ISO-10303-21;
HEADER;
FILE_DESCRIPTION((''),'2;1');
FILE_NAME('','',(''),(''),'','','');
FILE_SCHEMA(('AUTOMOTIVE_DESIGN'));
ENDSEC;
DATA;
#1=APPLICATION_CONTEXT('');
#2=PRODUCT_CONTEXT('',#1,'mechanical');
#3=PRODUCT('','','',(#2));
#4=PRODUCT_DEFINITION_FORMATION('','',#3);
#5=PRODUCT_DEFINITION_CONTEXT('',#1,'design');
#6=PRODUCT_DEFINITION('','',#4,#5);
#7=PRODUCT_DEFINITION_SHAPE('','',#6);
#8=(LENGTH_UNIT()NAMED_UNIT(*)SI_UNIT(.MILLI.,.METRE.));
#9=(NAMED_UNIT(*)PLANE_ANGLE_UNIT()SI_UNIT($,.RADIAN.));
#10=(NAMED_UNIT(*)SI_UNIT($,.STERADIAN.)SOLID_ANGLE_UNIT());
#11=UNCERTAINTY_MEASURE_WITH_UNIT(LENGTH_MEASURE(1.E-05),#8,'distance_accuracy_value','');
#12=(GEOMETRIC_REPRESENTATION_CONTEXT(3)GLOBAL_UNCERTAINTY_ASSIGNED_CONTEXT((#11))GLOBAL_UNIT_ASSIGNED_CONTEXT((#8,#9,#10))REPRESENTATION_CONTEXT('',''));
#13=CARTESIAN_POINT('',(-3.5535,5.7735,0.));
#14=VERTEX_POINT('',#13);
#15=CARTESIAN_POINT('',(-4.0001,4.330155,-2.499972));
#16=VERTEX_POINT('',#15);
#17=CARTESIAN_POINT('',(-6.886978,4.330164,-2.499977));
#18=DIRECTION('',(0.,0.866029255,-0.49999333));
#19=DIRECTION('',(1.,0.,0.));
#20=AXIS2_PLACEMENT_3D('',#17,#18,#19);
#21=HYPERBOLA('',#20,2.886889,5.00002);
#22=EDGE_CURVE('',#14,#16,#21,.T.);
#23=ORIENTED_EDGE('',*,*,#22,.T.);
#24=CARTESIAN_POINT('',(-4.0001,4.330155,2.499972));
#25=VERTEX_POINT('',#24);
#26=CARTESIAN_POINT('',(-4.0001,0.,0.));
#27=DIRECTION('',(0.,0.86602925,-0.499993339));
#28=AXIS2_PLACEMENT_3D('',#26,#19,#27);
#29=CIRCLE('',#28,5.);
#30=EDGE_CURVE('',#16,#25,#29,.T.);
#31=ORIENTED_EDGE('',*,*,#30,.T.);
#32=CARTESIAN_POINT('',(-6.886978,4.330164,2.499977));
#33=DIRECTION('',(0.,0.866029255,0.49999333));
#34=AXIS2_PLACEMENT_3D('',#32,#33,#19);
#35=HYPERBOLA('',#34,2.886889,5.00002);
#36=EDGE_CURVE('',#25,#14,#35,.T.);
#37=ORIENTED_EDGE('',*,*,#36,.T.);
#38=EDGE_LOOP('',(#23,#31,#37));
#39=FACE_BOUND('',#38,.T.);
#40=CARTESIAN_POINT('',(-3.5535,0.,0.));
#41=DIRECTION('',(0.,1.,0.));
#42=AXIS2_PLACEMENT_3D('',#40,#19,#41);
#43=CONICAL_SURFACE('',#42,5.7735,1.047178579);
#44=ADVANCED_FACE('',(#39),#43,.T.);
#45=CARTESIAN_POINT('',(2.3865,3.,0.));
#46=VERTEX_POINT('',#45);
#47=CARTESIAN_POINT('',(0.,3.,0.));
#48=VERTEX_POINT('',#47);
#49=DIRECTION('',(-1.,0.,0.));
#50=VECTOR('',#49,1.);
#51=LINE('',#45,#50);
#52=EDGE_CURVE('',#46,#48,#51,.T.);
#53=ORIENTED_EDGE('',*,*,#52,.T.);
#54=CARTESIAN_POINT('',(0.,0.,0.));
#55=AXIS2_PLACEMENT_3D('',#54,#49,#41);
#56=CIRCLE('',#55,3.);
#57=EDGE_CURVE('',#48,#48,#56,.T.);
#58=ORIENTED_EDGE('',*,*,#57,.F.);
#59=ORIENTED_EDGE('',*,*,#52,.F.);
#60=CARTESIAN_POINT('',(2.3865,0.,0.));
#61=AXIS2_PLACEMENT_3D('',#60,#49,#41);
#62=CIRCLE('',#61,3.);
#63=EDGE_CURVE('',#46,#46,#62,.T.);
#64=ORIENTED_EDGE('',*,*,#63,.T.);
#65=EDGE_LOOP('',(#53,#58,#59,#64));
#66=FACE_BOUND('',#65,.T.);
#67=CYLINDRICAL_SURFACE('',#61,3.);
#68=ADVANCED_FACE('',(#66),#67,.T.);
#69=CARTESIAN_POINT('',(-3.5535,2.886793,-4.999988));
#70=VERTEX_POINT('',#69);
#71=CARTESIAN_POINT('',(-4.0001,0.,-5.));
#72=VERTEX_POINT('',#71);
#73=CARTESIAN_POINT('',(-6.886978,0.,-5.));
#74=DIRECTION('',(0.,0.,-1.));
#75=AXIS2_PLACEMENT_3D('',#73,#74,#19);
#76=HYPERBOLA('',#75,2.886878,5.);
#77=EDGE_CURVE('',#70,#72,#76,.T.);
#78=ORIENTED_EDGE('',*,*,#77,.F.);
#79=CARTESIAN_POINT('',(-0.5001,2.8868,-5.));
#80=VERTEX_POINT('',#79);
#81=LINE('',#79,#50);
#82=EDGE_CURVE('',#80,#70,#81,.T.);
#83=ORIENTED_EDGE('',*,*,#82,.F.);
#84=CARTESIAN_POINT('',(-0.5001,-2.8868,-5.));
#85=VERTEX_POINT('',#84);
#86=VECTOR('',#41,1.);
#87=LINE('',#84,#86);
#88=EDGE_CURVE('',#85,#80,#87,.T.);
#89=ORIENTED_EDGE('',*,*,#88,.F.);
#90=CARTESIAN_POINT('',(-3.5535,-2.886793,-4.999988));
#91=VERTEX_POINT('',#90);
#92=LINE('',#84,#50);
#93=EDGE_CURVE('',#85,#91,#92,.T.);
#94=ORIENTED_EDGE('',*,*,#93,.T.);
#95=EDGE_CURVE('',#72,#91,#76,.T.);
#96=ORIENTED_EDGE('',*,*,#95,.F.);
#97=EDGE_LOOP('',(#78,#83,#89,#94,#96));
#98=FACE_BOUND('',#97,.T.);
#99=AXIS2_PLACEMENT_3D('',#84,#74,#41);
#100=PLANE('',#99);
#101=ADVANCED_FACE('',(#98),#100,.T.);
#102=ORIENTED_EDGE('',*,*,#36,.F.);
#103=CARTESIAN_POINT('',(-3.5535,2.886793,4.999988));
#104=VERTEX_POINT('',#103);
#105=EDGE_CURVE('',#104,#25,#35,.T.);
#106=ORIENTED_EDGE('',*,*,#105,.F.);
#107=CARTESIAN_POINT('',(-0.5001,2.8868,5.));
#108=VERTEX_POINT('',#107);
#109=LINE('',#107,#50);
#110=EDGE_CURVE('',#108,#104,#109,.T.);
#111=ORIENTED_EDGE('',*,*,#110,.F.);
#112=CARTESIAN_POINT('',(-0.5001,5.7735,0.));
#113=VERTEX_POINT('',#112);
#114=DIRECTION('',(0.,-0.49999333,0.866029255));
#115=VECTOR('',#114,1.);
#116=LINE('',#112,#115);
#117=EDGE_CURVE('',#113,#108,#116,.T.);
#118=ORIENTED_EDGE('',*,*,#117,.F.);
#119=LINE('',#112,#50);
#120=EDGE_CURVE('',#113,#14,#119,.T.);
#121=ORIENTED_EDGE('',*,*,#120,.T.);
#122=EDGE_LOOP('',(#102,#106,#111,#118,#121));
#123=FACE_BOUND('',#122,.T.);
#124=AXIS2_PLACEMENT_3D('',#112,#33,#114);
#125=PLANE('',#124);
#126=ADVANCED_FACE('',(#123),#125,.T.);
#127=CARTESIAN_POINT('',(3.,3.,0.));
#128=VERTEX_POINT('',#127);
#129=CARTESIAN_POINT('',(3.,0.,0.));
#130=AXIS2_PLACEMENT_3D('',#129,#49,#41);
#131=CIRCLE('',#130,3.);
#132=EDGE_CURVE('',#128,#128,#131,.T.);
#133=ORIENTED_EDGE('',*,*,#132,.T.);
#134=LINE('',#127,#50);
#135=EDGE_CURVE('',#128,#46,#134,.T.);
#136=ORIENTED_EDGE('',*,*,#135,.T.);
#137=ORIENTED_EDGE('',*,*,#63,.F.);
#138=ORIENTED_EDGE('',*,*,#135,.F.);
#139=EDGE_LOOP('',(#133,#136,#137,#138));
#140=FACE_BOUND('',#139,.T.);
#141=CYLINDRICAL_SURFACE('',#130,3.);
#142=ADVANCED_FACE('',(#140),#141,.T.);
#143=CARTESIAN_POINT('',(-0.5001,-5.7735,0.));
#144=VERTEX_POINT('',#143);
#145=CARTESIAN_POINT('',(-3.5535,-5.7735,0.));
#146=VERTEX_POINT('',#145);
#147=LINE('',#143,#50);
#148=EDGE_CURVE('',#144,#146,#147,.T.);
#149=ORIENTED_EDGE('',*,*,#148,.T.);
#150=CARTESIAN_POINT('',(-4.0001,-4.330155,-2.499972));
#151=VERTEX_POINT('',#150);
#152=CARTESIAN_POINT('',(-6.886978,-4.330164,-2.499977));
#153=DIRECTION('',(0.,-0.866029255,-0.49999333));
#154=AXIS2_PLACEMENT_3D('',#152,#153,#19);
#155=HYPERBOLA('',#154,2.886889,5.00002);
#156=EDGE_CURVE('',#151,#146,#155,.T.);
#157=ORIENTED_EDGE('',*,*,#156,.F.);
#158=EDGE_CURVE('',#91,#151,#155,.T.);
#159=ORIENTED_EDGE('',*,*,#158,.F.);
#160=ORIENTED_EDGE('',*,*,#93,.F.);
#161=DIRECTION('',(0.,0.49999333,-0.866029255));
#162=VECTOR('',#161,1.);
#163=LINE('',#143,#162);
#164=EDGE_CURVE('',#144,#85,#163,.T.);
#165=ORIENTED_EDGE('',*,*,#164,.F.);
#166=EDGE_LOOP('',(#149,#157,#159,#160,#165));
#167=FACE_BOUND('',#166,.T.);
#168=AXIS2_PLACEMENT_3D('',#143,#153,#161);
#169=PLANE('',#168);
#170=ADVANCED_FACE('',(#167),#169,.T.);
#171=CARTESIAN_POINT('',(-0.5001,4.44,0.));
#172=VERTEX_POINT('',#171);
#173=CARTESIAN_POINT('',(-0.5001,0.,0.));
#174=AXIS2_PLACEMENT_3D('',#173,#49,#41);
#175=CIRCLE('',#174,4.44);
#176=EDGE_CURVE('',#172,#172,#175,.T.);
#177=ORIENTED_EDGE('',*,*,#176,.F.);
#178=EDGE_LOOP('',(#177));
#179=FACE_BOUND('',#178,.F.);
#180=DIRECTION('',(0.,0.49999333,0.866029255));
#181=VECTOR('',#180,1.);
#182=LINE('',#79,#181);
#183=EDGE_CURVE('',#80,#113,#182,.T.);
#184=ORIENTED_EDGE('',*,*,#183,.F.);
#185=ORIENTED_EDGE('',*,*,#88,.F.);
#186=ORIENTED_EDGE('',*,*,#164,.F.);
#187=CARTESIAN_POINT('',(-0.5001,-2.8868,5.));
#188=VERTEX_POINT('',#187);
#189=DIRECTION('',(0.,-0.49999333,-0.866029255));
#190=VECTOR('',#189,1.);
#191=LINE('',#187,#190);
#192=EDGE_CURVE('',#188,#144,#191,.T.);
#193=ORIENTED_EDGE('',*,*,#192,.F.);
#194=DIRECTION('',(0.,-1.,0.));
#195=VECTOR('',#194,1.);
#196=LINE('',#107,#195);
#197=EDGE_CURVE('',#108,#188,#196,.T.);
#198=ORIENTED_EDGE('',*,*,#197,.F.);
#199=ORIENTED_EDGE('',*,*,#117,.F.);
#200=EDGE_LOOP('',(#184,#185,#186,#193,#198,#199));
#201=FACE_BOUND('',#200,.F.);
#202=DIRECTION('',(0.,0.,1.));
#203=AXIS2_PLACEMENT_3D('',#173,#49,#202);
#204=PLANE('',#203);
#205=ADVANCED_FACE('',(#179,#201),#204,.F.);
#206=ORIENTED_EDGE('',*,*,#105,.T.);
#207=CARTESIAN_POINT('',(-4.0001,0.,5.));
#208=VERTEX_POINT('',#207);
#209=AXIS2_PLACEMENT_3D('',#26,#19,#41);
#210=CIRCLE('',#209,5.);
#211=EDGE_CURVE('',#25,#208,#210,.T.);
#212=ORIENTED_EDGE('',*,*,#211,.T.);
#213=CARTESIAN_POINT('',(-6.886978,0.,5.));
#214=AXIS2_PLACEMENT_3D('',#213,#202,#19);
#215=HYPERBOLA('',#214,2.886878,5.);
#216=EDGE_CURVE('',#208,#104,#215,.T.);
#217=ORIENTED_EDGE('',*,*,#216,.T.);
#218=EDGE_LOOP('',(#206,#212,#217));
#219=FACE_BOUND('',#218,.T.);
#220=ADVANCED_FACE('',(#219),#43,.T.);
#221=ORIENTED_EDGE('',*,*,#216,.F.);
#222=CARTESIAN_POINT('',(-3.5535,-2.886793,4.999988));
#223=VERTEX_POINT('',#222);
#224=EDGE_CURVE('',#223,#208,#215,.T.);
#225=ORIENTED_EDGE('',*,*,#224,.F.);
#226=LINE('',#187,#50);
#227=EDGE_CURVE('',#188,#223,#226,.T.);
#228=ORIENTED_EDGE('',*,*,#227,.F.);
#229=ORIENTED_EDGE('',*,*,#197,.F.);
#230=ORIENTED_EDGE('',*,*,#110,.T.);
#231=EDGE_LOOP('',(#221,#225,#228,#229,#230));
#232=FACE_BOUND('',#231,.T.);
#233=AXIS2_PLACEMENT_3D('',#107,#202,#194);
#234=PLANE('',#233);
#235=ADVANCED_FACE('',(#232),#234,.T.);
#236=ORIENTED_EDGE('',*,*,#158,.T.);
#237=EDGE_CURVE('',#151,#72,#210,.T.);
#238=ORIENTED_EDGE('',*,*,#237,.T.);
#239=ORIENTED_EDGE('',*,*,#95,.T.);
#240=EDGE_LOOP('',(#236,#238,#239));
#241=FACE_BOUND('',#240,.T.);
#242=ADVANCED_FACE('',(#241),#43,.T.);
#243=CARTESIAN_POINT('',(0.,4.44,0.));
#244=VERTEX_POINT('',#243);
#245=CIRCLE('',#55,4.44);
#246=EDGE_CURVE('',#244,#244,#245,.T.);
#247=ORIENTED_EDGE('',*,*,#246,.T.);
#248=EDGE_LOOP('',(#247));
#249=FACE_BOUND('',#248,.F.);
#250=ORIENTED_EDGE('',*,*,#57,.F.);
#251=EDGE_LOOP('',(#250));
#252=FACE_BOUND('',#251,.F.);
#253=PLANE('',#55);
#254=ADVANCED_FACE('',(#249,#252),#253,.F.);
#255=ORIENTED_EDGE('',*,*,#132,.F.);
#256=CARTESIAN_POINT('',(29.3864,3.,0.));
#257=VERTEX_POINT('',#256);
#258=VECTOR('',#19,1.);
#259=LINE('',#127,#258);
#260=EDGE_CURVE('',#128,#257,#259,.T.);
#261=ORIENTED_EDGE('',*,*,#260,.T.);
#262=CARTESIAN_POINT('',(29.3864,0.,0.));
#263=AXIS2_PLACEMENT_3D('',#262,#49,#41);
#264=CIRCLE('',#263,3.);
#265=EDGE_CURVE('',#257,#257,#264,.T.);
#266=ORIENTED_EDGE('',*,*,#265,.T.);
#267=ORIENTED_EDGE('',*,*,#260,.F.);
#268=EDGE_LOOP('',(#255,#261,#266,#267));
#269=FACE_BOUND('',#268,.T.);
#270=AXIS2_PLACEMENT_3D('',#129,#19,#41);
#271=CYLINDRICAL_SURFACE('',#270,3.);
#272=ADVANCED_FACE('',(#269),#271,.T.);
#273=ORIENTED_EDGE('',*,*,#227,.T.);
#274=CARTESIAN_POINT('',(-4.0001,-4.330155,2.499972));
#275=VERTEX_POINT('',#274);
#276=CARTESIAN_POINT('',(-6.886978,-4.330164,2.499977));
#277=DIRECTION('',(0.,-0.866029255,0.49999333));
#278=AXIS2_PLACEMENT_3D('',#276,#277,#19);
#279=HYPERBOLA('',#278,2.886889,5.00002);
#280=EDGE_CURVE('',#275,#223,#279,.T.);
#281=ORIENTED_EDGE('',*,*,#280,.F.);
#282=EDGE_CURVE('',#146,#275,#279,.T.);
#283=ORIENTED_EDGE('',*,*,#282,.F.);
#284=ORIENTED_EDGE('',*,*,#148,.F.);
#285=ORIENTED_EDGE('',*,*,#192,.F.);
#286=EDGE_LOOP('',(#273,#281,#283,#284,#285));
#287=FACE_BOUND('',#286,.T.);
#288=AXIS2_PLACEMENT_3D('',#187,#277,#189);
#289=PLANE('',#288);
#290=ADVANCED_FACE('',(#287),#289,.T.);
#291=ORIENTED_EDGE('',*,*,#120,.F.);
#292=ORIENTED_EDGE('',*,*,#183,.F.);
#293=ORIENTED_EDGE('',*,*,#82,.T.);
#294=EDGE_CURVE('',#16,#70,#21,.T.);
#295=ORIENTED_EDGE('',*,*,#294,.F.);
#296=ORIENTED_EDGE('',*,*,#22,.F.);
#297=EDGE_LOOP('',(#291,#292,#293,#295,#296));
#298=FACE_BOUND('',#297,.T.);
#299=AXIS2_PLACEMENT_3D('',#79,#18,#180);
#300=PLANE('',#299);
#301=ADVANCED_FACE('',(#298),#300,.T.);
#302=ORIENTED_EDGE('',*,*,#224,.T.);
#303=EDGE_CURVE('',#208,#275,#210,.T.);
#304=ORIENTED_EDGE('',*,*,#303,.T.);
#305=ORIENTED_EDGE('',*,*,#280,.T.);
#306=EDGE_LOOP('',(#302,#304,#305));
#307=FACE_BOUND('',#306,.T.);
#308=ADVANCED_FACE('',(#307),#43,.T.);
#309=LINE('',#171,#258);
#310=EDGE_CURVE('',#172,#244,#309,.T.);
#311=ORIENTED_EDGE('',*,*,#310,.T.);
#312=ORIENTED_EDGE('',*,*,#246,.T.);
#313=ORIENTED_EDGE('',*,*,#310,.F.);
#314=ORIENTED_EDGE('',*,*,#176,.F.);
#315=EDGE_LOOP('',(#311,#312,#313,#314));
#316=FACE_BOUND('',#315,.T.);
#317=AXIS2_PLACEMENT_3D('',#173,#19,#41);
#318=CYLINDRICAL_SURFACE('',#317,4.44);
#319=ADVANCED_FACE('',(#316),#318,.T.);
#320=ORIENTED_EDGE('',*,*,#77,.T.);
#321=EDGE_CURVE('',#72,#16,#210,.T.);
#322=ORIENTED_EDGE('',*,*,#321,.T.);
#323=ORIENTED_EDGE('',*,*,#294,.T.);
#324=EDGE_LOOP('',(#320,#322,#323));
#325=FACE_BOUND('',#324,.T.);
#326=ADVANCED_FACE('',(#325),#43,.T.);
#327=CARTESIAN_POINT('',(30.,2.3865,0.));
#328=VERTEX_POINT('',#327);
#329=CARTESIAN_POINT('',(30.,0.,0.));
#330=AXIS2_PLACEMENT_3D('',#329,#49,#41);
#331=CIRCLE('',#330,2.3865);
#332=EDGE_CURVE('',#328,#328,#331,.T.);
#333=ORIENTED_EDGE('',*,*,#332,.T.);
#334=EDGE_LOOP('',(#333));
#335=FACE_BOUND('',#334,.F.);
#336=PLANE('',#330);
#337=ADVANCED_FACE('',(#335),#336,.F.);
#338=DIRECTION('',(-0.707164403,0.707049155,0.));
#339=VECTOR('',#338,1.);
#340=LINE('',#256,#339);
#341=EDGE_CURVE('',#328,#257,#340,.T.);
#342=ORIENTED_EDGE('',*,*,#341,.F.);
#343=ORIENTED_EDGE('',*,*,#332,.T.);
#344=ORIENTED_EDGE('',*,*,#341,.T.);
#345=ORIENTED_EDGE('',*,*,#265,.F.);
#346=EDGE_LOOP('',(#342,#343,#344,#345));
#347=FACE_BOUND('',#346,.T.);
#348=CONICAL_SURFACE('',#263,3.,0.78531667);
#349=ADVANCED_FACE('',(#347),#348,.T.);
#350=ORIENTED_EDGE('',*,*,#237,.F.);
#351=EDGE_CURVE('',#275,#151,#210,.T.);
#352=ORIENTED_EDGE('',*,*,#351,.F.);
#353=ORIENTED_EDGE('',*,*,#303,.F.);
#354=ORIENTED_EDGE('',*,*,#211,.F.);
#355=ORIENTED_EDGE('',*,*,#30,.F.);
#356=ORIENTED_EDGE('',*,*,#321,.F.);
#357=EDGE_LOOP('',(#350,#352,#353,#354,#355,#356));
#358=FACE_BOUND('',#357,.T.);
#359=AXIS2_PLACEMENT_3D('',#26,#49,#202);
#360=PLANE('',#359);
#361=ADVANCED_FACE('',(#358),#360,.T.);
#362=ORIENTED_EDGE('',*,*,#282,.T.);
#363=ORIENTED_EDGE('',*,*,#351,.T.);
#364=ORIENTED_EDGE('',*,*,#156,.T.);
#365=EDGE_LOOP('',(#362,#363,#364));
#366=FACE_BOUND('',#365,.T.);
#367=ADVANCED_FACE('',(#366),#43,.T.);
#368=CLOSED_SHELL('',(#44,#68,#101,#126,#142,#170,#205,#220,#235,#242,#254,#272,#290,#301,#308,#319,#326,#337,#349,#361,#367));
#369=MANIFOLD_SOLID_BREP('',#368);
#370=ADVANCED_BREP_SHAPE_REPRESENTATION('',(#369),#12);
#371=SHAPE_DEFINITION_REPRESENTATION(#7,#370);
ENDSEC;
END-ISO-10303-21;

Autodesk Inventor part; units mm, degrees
ref_plane "YZ Plane" through (0, 0, 0) normal (1, 0, 0) x (0, 1, 0)
ref_plane "XZ Plane" through (0, 0, 0) normal (0, 1, 0) x (-1, 0, 0)
sketch "Sketch1" plane through (0, 0, 0) normal (0, 0, 1) x (1, 0, 0)
  line L0 (0, 4.44) -> (0, 3)
  line L1 (3, 3) -> (30, 3)
  line L2 (30, 3) -> (30, 0)
  line L3 (30, 0) -> (-0.5001, 0)
  line L4 (-6.6001, 0) -> (36.1, 0) projected
  line L5 (-0.5001, 0) -> (-0.5001, 4.44)
  line L6 (-0.5001, 4.44) -> (0, 4.44)
  line L7 (3, 3) -> (2.3865, 3)
  line L8 (2.3865, 3) -> (0, 3)
  line L9 (0, -0.888) -> (0, 5.328) projected
  dimension "d0" = 30
  dimension "d1" = 27
  dimension "d2" = 6
  dimension "d9" = 0.5001
  dimension "d10" = 8.88
  dimension "d13" = 0.6136
  dimension "d14" = 6
revolve "Body" add sketch "Sketch1" angle 360 about axis through (30, 0, 0) along (-1, 0, 0)
sketch "Sketch2" plane through (-0.5001, 0, 0) normal (-1, 0, 0) x (0, 0, 1)
  line L0 (0, 5.7735) -> (5, 2.8868)
  line L1 (5, 2.8868) -> (5, -2.8868)
  line L2 (5, -2.8868) -> (0, -5.7735)
  line L3 (0, -5.7735) -> (-5, -2.8868)
  line L4 (-5, -2.8868) -> (-5, 2.8868)
  line L5 (-5, 2.8868) -> (0, 5.7735)
  point P0 (0, 0)
  point P1 (0, 0)
  dimension "d11" = 10
extrude "Head" add sketch "Sketch2" along normal blind 3.5
sketch "Sketch4" plane through (0, 0, 0) normal (0, 0, 1) x (1, 0, 0)
  line L0 (-4.0001, 5) -> (-4.0001, 5.7735)
  line L1 (-4.0001, 5.7735) -> (-3.5535, 5.7735)
  line L2 (-3.5535, 5.7735) -> (-4.0001, 5)
  line L3 (-4.7001, 0) -> (0.1999, 0) projected
  line L4 (-0.5001, 5.7735) -> (-4.0001, 5.7735) projected
  line L5 (-4.0001, 2.8868) -> (-4.0001, 5.7735) projected
  dimension "d5" = 30
  dimension "d19" = 10
revolve "Chamfer1" cut sketch "Sketch4" angle 360 about axis through (-10, 0, 0) along (1, 0, 0)
thread "Thread" size "M6x1" class "6g" standard "ISO Metric profile" length 27
chamfer "Chamfer2" distance 0.6135 distance2 0.6136 1 edges at (30, -3, 0) measured on face at (30, 1.1079, -0.4377)
ref_plane "Work Plane1" through (1.525, 0, 0) normal (0, 0, 1) x (1, 0, 0)
equation "\"d0\" = NLG"
equation "\"d1\" = GEL"
equation "\"d2\" = GD"
equation "\"d10\" = SD2"
equation "\"d14\" = BDM"
equation "\"d11\" = SW"
equation "\"d3\" = KOH - SD"
equation "\"d5\" = ANG1"
equation "\"d19\" = SW0"
equation "\"d15\" = GEL"
equation "\"d6\" = -0.5 * SPD + 0.5 * GD"
equation "\"NLG\" = 30"
equation "\"GD\" = NND"
equation "\"BDM\" = NND"
equation "\"KOH\" = 4"
equation "\"GEL\" = 27"
equation "\"SW\" = 10"
equation "\"SW0\" = SW"
equation "\"SPD\" = NND - 1.2269 * PTC"
equation "\"SD2\" = 8.88"
equation "\"SD\" = 0.5"
equation "\"ANG1\" = 30deg"
equation "\"GAL\" = 0.61345 * PTC"
equation "\"GUL\" = 0.61345 * PTC"
equation "\"RR\" = 0.25"
equation "\"GD1\" = THREADDIA - 1.2269 * PTC"
equation "\"THREADDIA\" = 6"
equation "\"SDH\" = SD2"
equation "\"SDHG\" = 3"
equation "\"TOA\" = 30deg"
equation "\"PTC\" = 1"
equation "\"NND\" = 6"
equation "\"E0\" = 11.55"
properties part number "ISO 4017 - M6 x 30" material "Stainless Steel, 440C"
